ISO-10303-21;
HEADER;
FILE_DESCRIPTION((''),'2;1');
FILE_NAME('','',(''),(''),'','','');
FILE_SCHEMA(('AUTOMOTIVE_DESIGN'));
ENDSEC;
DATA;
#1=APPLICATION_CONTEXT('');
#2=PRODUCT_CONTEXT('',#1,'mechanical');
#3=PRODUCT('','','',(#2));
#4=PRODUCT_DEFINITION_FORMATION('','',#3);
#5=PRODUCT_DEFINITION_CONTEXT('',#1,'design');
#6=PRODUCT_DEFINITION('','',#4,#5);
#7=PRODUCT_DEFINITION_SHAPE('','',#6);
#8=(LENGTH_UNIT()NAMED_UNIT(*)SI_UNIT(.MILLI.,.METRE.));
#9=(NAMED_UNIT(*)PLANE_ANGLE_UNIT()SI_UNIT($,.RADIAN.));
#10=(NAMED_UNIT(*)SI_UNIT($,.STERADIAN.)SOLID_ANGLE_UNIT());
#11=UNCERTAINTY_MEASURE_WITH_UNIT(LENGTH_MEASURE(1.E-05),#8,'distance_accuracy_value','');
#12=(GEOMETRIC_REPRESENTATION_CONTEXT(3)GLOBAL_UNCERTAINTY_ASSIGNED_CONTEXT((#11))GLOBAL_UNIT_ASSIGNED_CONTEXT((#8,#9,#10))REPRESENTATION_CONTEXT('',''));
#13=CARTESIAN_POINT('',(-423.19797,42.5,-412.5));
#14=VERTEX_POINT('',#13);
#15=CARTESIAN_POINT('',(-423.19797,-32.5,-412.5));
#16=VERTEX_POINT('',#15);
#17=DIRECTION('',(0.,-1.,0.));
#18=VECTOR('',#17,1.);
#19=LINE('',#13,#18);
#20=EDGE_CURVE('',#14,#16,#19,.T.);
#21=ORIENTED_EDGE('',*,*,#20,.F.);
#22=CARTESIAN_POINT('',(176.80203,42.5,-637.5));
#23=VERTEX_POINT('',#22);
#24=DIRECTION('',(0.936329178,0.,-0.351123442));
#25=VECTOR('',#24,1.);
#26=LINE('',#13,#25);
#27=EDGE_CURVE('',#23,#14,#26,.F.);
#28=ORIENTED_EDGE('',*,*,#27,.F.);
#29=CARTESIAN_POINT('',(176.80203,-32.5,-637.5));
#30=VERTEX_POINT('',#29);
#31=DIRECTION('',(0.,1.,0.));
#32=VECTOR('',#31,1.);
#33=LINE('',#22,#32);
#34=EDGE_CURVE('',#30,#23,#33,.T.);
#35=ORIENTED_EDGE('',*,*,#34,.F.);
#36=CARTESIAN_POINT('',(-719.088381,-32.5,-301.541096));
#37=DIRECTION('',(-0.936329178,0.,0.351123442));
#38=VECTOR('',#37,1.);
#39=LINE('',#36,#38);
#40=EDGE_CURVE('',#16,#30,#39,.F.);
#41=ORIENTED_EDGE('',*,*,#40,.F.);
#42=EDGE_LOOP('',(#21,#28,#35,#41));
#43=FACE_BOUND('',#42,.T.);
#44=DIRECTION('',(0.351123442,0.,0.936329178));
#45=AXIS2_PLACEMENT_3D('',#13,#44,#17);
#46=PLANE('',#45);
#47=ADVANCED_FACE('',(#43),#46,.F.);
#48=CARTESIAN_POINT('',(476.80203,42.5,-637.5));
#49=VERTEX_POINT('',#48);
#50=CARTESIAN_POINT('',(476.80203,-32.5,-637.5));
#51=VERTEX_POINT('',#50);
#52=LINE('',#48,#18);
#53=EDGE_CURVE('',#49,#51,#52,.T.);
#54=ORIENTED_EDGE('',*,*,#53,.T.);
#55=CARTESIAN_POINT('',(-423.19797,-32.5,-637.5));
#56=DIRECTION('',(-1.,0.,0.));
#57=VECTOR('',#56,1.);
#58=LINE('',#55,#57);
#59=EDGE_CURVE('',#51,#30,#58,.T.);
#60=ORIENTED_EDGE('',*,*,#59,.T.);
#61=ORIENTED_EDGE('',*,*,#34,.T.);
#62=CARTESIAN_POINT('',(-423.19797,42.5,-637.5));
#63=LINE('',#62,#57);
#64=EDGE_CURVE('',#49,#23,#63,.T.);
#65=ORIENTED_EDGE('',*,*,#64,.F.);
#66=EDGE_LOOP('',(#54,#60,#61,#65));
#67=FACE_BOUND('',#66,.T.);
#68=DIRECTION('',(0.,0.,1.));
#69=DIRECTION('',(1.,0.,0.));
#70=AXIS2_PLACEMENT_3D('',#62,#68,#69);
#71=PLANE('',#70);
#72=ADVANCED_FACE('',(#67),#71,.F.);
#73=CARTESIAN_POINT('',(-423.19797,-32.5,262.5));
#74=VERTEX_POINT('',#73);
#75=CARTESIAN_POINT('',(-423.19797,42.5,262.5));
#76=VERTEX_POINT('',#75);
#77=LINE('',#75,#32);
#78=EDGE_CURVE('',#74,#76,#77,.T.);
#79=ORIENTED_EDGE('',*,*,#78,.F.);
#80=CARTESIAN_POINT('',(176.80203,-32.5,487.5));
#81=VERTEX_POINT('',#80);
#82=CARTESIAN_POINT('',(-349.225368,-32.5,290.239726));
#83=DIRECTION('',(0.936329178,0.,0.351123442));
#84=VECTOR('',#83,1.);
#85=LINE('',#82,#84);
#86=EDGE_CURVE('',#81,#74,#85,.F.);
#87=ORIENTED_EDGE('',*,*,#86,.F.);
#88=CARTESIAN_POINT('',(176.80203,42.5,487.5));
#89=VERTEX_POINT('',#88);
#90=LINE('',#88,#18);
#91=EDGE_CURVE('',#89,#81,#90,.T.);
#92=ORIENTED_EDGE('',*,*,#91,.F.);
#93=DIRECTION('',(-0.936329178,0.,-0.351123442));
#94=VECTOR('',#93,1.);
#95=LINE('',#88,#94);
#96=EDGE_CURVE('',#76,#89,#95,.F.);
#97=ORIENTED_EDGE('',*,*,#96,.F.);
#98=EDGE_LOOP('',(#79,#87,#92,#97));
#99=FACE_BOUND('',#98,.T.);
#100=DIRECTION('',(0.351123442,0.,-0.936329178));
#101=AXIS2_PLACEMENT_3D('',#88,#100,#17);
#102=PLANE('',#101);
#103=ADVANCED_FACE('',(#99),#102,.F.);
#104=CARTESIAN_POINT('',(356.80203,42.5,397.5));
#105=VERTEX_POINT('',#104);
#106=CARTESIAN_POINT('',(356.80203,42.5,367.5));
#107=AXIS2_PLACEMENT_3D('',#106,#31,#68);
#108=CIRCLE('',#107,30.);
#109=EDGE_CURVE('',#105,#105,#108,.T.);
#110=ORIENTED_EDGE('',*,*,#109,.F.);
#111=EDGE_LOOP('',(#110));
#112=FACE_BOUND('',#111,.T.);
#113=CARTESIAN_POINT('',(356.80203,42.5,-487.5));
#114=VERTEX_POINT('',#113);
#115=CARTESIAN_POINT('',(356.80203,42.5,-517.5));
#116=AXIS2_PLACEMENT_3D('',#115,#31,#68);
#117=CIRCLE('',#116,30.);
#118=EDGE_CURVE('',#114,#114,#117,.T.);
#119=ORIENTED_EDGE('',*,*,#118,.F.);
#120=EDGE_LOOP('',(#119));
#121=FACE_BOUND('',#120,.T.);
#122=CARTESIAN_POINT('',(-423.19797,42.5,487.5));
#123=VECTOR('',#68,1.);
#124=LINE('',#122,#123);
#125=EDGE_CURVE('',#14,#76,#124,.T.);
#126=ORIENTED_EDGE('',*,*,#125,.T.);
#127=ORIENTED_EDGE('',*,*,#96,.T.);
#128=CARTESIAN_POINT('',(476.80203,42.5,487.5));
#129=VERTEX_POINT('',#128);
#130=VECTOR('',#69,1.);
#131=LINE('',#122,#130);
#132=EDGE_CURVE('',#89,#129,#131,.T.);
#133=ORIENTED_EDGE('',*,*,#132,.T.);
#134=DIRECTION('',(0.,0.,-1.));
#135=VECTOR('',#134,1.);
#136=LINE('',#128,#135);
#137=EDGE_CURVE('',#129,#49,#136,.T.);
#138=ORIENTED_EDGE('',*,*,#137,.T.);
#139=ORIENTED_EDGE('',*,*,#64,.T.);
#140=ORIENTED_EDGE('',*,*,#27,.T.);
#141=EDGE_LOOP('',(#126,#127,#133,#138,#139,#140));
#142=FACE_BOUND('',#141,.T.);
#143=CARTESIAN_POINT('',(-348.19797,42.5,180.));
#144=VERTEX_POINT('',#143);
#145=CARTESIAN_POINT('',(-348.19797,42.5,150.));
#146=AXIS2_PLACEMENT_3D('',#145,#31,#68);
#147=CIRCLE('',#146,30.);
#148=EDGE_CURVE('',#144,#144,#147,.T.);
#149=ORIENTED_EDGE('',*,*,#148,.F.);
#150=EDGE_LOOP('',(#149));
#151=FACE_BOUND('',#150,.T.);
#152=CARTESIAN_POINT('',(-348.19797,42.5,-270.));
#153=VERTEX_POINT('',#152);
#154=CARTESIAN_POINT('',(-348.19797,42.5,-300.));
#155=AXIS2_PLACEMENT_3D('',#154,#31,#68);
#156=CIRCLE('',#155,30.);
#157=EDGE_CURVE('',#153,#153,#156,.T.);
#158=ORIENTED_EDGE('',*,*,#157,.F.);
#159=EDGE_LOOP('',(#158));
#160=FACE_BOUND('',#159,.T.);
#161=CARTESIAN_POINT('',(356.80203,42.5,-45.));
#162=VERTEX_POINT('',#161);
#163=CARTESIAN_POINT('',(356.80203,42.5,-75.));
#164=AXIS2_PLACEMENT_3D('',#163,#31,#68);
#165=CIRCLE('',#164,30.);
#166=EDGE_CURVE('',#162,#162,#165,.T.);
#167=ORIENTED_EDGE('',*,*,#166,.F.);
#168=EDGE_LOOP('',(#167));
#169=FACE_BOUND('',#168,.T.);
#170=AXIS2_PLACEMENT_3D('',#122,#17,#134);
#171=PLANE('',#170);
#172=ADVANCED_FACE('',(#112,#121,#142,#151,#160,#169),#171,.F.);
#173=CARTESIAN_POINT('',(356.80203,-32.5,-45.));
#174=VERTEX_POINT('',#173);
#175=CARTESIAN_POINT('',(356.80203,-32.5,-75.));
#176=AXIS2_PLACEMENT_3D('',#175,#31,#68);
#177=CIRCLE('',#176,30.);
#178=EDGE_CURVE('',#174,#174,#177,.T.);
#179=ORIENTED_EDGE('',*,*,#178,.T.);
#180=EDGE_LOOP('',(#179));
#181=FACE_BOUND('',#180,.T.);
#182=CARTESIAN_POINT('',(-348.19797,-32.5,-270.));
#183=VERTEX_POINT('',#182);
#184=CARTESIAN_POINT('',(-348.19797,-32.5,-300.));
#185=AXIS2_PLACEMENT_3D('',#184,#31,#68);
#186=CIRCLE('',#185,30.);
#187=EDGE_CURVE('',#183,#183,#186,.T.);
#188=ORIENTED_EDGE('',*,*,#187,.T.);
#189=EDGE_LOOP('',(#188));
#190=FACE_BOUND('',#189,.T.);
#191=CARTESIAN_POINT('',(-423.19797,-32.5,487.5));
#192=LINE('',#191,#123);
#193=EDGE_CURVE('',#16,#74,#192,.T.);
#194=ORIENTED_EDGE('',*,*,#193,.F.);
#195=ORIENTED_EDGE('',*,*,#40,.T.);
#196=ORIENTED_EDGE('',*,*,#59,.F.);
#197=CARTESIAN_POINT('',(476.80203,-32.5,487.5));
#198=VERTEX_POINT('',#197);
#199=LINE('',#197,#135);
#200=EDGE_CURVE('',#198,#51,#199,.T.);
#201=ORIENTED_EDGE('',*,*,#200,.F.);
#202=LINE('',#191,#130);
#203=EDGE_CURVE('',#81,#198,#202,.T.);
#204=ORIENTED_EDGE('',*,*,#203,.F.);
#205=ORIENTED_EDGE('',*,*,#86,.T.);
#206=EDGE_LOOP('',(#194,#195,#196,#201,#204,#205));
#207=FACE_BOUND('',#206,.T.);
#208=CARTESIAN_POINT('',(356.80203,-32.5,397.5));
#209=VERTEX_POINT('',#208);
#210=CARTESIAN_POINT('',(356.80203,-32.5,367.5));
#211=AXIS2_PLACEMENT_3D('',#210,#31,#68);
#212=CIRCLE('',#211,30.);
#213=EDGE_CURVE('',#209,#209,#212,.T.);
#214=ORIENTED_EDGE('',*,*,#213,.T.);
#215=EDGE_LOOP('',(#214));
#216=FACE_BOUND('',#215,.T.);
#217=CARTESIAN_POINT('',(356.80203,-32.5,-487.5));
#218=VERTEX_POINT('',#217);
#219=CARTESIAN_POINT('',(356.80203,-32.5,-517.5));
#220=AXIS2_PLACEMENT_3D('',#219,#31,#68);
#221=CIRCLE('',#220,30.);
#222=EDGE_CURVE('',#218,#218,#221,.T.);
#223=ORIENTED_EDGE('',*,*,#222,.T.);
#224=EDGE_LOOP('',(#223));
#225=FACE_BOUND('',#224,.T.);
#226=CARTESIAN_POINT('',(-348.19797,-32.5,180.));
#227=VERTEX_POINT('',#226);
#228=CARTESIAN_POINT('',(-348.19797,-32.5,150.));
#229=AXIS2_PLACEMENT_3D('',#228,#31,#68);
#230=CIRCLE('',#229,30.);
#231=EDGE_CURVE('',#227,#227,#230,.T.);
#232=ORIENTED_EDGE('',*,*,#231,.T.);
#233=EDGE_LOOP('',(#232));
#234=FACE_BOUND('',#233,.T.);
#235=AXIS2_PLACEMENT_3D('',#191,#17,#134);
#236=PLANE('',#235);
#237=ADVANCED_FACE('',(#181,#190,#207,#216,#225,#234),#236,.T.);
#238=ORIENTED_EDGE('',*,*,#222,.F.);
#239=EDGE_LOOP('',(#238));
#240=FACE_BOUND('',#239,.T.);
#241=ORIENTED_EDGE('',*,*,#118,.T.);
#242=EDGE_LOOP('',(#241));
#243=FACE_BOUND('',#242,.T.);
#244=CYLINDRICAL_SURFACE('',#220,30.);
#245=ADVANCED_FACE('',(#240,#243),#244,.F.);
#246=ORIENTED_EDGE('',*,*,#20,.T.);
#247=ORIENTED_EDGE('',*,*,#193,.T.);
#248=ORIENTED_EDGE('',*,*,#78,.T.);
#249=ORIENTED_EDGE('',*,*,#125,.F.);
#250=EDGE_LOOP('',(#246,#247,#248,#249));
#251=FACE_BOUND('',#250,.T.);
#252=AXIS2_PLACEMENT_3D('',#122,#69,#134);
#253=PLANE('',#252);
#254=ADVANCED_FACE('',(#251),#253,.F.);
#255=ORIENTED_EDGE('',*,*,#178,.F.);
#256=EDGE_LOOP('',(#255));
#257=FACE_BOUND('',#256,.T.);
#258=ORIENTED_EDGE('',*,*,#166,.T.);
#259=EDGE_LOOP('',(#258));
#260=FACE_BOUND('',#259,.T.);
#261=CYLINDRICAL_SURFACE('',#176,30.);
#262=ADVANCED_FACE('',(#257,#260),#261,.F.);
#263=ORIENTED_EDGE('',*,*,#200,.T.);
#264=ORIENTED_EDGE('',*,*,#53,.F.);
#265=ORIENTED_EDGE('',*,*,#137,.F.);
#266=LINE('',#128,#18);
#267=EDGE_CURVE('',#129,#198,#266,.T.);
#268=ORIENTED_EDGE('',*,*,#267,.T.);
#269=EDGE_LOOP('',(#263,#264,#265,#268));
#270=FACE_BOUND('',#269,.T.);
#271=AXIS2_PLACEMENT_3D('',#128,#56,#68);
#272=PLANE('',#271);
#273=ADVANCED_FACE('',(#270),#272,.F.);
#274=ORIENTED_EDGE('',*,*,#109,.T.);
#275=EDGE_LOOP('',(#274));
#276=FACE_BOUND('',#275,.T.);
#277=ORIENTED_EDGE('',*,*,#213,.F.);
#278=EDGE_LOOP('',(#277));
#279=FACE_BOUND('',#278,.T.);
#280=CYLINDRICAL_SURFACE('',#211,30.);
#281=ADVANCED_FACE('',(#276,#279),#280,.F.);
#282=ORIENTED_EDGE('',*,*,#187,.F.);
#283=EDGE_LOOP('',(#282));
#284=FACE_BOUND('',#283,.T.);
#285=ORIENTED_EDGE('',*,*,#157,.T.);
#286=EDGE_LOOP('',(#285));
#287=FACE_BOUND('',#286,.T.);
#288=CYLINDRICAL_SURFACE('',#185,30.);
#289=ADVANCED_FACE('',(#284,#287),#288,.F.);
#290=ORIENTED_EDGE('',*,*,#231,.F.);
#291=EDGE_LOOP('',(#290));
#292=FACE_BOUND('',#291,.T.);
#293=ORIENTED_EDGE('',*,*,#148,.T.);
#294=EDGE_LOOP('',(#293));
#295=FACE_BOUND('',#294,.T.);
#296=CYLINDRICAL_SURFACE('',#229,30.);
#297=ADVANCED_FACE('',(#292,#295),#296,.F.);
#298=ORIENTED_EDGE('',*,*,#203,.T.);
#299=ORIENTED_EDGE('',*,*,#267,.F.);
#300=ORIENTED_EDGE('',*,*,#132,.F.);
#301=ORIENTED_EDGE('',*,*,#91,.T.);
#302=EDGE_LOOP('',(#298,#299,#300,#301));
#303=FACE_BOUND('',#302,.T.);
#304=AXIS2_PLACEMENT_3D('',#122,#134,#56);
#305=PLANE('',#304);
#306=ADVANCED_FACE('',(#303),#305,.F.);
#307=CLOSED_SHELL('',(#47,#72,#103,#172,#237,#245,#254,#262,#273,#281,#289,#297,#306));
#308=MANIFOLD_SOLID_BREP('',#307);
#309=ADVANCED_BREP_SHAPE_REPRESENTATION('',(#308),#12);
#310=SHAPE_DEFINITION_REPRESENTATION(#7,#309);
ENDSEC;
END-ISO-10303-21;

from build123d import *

# Parameters (mm, degrees)
BOSS_EXTRUDE1_OUTLINE_W = 120
BOSS_EXTRUDE1_OUTLINE_H = 150
BOSS_EXTRUDE1_DEPTH     = 10
CHAMFER1_SIZE           = 30
CHAMFER1_SIZE2          = 80
CHAMFER2_SIZE           = 80
CHAMFER2_SIZE2          = 30
SKETCH2_R               = 4
CUT_EXTRUDE1_DEPTH      = 10
SCALE1_SCALE            = 7.5


# Read off the part's stored shape, not the designer's step: Boss-Extrude1
with BuildPart() as part:
    # Boss-Extrude1 outline → Boss-Extrude1 (new body)
    with BuildSketch(Plane(origin=(0, 0, 0), x_dir=(1, 0, 0), z_dir=(0, 1, 0))):
        with Locations((60, 75)):
            Rectangle(BOSS_EXTRUDE1_OUTLINE_W, BOSS_EXTRUDE1_OUTLINE_H)
    extrude(amount=BOSS_EXTRUDE1_DEPTH)

    # Chamfer1
    chamfer1_edges = [part.edges().sort_by_distance(p)[0] for p in [
        (0, 5, 0),
    ]]
    chamfer1_side = [part.faces().sort_by_distance(p)[0] for p in [
        (0, 5, -75),
    ]]
    chamfer(chamfer1_edges, length=CHAMFER1_SIZE, length2=CHAMFER1_SIZE2, reference=chamfer1_side[0])

    # Chamfer2
    chamfer2_edges = [part.edges().sort_by_distance(p)[0] for p in [
        (0, 5, -150),
    ]]
    chamfer2_side = [part.faces().sort_by_distance(p)[0] for p in [
        (60, 5, -150),
    ]]
    chamfer(chamfer2_edges, length=CHAMFER2_SIZE, length2=CHAMFER2_SIZE2, reference=chamfer2_side[0])

    # Sketch2 → Cut-Extrude1 (cut)
    with BuildSketch(Plane(origin=(0, 10, 0), x_dir=(1, 0, 0), z_dir=(0, 1, 0))):
        with Locations(Location((104, 134, 0), (0, 0, 270))):
            Circle(SKETCH2_R)
        with Locations(Location((104, 16, 0), (0, 0, 270))):
            Circle(SKETCH2_R)
        with Locations(Location((10, 105, 0), (0, 0, 270))):
            Circle(SKETCH2_R)
        with Locations(Location((10, 45, 0), (0, 0, 270))):
            Circle(SKETCH2_R)
        with Locations(Location((104, 75, 0), (0, 0, 270))):
            Circle(SKETCH2_R)
    extrude(amount=-CUT_EXTRUDE1_DEPTH, mode=Mode.SUBTRACT)


with BuildPart() as part_1:
    # Scale1: scaled about (65.107380076, 5, -75)
    add(part.part.scale(SCALE1_SCALE).moved(Location((-423.197970494, -32.5, 487.5))))


solid = part_1.part
